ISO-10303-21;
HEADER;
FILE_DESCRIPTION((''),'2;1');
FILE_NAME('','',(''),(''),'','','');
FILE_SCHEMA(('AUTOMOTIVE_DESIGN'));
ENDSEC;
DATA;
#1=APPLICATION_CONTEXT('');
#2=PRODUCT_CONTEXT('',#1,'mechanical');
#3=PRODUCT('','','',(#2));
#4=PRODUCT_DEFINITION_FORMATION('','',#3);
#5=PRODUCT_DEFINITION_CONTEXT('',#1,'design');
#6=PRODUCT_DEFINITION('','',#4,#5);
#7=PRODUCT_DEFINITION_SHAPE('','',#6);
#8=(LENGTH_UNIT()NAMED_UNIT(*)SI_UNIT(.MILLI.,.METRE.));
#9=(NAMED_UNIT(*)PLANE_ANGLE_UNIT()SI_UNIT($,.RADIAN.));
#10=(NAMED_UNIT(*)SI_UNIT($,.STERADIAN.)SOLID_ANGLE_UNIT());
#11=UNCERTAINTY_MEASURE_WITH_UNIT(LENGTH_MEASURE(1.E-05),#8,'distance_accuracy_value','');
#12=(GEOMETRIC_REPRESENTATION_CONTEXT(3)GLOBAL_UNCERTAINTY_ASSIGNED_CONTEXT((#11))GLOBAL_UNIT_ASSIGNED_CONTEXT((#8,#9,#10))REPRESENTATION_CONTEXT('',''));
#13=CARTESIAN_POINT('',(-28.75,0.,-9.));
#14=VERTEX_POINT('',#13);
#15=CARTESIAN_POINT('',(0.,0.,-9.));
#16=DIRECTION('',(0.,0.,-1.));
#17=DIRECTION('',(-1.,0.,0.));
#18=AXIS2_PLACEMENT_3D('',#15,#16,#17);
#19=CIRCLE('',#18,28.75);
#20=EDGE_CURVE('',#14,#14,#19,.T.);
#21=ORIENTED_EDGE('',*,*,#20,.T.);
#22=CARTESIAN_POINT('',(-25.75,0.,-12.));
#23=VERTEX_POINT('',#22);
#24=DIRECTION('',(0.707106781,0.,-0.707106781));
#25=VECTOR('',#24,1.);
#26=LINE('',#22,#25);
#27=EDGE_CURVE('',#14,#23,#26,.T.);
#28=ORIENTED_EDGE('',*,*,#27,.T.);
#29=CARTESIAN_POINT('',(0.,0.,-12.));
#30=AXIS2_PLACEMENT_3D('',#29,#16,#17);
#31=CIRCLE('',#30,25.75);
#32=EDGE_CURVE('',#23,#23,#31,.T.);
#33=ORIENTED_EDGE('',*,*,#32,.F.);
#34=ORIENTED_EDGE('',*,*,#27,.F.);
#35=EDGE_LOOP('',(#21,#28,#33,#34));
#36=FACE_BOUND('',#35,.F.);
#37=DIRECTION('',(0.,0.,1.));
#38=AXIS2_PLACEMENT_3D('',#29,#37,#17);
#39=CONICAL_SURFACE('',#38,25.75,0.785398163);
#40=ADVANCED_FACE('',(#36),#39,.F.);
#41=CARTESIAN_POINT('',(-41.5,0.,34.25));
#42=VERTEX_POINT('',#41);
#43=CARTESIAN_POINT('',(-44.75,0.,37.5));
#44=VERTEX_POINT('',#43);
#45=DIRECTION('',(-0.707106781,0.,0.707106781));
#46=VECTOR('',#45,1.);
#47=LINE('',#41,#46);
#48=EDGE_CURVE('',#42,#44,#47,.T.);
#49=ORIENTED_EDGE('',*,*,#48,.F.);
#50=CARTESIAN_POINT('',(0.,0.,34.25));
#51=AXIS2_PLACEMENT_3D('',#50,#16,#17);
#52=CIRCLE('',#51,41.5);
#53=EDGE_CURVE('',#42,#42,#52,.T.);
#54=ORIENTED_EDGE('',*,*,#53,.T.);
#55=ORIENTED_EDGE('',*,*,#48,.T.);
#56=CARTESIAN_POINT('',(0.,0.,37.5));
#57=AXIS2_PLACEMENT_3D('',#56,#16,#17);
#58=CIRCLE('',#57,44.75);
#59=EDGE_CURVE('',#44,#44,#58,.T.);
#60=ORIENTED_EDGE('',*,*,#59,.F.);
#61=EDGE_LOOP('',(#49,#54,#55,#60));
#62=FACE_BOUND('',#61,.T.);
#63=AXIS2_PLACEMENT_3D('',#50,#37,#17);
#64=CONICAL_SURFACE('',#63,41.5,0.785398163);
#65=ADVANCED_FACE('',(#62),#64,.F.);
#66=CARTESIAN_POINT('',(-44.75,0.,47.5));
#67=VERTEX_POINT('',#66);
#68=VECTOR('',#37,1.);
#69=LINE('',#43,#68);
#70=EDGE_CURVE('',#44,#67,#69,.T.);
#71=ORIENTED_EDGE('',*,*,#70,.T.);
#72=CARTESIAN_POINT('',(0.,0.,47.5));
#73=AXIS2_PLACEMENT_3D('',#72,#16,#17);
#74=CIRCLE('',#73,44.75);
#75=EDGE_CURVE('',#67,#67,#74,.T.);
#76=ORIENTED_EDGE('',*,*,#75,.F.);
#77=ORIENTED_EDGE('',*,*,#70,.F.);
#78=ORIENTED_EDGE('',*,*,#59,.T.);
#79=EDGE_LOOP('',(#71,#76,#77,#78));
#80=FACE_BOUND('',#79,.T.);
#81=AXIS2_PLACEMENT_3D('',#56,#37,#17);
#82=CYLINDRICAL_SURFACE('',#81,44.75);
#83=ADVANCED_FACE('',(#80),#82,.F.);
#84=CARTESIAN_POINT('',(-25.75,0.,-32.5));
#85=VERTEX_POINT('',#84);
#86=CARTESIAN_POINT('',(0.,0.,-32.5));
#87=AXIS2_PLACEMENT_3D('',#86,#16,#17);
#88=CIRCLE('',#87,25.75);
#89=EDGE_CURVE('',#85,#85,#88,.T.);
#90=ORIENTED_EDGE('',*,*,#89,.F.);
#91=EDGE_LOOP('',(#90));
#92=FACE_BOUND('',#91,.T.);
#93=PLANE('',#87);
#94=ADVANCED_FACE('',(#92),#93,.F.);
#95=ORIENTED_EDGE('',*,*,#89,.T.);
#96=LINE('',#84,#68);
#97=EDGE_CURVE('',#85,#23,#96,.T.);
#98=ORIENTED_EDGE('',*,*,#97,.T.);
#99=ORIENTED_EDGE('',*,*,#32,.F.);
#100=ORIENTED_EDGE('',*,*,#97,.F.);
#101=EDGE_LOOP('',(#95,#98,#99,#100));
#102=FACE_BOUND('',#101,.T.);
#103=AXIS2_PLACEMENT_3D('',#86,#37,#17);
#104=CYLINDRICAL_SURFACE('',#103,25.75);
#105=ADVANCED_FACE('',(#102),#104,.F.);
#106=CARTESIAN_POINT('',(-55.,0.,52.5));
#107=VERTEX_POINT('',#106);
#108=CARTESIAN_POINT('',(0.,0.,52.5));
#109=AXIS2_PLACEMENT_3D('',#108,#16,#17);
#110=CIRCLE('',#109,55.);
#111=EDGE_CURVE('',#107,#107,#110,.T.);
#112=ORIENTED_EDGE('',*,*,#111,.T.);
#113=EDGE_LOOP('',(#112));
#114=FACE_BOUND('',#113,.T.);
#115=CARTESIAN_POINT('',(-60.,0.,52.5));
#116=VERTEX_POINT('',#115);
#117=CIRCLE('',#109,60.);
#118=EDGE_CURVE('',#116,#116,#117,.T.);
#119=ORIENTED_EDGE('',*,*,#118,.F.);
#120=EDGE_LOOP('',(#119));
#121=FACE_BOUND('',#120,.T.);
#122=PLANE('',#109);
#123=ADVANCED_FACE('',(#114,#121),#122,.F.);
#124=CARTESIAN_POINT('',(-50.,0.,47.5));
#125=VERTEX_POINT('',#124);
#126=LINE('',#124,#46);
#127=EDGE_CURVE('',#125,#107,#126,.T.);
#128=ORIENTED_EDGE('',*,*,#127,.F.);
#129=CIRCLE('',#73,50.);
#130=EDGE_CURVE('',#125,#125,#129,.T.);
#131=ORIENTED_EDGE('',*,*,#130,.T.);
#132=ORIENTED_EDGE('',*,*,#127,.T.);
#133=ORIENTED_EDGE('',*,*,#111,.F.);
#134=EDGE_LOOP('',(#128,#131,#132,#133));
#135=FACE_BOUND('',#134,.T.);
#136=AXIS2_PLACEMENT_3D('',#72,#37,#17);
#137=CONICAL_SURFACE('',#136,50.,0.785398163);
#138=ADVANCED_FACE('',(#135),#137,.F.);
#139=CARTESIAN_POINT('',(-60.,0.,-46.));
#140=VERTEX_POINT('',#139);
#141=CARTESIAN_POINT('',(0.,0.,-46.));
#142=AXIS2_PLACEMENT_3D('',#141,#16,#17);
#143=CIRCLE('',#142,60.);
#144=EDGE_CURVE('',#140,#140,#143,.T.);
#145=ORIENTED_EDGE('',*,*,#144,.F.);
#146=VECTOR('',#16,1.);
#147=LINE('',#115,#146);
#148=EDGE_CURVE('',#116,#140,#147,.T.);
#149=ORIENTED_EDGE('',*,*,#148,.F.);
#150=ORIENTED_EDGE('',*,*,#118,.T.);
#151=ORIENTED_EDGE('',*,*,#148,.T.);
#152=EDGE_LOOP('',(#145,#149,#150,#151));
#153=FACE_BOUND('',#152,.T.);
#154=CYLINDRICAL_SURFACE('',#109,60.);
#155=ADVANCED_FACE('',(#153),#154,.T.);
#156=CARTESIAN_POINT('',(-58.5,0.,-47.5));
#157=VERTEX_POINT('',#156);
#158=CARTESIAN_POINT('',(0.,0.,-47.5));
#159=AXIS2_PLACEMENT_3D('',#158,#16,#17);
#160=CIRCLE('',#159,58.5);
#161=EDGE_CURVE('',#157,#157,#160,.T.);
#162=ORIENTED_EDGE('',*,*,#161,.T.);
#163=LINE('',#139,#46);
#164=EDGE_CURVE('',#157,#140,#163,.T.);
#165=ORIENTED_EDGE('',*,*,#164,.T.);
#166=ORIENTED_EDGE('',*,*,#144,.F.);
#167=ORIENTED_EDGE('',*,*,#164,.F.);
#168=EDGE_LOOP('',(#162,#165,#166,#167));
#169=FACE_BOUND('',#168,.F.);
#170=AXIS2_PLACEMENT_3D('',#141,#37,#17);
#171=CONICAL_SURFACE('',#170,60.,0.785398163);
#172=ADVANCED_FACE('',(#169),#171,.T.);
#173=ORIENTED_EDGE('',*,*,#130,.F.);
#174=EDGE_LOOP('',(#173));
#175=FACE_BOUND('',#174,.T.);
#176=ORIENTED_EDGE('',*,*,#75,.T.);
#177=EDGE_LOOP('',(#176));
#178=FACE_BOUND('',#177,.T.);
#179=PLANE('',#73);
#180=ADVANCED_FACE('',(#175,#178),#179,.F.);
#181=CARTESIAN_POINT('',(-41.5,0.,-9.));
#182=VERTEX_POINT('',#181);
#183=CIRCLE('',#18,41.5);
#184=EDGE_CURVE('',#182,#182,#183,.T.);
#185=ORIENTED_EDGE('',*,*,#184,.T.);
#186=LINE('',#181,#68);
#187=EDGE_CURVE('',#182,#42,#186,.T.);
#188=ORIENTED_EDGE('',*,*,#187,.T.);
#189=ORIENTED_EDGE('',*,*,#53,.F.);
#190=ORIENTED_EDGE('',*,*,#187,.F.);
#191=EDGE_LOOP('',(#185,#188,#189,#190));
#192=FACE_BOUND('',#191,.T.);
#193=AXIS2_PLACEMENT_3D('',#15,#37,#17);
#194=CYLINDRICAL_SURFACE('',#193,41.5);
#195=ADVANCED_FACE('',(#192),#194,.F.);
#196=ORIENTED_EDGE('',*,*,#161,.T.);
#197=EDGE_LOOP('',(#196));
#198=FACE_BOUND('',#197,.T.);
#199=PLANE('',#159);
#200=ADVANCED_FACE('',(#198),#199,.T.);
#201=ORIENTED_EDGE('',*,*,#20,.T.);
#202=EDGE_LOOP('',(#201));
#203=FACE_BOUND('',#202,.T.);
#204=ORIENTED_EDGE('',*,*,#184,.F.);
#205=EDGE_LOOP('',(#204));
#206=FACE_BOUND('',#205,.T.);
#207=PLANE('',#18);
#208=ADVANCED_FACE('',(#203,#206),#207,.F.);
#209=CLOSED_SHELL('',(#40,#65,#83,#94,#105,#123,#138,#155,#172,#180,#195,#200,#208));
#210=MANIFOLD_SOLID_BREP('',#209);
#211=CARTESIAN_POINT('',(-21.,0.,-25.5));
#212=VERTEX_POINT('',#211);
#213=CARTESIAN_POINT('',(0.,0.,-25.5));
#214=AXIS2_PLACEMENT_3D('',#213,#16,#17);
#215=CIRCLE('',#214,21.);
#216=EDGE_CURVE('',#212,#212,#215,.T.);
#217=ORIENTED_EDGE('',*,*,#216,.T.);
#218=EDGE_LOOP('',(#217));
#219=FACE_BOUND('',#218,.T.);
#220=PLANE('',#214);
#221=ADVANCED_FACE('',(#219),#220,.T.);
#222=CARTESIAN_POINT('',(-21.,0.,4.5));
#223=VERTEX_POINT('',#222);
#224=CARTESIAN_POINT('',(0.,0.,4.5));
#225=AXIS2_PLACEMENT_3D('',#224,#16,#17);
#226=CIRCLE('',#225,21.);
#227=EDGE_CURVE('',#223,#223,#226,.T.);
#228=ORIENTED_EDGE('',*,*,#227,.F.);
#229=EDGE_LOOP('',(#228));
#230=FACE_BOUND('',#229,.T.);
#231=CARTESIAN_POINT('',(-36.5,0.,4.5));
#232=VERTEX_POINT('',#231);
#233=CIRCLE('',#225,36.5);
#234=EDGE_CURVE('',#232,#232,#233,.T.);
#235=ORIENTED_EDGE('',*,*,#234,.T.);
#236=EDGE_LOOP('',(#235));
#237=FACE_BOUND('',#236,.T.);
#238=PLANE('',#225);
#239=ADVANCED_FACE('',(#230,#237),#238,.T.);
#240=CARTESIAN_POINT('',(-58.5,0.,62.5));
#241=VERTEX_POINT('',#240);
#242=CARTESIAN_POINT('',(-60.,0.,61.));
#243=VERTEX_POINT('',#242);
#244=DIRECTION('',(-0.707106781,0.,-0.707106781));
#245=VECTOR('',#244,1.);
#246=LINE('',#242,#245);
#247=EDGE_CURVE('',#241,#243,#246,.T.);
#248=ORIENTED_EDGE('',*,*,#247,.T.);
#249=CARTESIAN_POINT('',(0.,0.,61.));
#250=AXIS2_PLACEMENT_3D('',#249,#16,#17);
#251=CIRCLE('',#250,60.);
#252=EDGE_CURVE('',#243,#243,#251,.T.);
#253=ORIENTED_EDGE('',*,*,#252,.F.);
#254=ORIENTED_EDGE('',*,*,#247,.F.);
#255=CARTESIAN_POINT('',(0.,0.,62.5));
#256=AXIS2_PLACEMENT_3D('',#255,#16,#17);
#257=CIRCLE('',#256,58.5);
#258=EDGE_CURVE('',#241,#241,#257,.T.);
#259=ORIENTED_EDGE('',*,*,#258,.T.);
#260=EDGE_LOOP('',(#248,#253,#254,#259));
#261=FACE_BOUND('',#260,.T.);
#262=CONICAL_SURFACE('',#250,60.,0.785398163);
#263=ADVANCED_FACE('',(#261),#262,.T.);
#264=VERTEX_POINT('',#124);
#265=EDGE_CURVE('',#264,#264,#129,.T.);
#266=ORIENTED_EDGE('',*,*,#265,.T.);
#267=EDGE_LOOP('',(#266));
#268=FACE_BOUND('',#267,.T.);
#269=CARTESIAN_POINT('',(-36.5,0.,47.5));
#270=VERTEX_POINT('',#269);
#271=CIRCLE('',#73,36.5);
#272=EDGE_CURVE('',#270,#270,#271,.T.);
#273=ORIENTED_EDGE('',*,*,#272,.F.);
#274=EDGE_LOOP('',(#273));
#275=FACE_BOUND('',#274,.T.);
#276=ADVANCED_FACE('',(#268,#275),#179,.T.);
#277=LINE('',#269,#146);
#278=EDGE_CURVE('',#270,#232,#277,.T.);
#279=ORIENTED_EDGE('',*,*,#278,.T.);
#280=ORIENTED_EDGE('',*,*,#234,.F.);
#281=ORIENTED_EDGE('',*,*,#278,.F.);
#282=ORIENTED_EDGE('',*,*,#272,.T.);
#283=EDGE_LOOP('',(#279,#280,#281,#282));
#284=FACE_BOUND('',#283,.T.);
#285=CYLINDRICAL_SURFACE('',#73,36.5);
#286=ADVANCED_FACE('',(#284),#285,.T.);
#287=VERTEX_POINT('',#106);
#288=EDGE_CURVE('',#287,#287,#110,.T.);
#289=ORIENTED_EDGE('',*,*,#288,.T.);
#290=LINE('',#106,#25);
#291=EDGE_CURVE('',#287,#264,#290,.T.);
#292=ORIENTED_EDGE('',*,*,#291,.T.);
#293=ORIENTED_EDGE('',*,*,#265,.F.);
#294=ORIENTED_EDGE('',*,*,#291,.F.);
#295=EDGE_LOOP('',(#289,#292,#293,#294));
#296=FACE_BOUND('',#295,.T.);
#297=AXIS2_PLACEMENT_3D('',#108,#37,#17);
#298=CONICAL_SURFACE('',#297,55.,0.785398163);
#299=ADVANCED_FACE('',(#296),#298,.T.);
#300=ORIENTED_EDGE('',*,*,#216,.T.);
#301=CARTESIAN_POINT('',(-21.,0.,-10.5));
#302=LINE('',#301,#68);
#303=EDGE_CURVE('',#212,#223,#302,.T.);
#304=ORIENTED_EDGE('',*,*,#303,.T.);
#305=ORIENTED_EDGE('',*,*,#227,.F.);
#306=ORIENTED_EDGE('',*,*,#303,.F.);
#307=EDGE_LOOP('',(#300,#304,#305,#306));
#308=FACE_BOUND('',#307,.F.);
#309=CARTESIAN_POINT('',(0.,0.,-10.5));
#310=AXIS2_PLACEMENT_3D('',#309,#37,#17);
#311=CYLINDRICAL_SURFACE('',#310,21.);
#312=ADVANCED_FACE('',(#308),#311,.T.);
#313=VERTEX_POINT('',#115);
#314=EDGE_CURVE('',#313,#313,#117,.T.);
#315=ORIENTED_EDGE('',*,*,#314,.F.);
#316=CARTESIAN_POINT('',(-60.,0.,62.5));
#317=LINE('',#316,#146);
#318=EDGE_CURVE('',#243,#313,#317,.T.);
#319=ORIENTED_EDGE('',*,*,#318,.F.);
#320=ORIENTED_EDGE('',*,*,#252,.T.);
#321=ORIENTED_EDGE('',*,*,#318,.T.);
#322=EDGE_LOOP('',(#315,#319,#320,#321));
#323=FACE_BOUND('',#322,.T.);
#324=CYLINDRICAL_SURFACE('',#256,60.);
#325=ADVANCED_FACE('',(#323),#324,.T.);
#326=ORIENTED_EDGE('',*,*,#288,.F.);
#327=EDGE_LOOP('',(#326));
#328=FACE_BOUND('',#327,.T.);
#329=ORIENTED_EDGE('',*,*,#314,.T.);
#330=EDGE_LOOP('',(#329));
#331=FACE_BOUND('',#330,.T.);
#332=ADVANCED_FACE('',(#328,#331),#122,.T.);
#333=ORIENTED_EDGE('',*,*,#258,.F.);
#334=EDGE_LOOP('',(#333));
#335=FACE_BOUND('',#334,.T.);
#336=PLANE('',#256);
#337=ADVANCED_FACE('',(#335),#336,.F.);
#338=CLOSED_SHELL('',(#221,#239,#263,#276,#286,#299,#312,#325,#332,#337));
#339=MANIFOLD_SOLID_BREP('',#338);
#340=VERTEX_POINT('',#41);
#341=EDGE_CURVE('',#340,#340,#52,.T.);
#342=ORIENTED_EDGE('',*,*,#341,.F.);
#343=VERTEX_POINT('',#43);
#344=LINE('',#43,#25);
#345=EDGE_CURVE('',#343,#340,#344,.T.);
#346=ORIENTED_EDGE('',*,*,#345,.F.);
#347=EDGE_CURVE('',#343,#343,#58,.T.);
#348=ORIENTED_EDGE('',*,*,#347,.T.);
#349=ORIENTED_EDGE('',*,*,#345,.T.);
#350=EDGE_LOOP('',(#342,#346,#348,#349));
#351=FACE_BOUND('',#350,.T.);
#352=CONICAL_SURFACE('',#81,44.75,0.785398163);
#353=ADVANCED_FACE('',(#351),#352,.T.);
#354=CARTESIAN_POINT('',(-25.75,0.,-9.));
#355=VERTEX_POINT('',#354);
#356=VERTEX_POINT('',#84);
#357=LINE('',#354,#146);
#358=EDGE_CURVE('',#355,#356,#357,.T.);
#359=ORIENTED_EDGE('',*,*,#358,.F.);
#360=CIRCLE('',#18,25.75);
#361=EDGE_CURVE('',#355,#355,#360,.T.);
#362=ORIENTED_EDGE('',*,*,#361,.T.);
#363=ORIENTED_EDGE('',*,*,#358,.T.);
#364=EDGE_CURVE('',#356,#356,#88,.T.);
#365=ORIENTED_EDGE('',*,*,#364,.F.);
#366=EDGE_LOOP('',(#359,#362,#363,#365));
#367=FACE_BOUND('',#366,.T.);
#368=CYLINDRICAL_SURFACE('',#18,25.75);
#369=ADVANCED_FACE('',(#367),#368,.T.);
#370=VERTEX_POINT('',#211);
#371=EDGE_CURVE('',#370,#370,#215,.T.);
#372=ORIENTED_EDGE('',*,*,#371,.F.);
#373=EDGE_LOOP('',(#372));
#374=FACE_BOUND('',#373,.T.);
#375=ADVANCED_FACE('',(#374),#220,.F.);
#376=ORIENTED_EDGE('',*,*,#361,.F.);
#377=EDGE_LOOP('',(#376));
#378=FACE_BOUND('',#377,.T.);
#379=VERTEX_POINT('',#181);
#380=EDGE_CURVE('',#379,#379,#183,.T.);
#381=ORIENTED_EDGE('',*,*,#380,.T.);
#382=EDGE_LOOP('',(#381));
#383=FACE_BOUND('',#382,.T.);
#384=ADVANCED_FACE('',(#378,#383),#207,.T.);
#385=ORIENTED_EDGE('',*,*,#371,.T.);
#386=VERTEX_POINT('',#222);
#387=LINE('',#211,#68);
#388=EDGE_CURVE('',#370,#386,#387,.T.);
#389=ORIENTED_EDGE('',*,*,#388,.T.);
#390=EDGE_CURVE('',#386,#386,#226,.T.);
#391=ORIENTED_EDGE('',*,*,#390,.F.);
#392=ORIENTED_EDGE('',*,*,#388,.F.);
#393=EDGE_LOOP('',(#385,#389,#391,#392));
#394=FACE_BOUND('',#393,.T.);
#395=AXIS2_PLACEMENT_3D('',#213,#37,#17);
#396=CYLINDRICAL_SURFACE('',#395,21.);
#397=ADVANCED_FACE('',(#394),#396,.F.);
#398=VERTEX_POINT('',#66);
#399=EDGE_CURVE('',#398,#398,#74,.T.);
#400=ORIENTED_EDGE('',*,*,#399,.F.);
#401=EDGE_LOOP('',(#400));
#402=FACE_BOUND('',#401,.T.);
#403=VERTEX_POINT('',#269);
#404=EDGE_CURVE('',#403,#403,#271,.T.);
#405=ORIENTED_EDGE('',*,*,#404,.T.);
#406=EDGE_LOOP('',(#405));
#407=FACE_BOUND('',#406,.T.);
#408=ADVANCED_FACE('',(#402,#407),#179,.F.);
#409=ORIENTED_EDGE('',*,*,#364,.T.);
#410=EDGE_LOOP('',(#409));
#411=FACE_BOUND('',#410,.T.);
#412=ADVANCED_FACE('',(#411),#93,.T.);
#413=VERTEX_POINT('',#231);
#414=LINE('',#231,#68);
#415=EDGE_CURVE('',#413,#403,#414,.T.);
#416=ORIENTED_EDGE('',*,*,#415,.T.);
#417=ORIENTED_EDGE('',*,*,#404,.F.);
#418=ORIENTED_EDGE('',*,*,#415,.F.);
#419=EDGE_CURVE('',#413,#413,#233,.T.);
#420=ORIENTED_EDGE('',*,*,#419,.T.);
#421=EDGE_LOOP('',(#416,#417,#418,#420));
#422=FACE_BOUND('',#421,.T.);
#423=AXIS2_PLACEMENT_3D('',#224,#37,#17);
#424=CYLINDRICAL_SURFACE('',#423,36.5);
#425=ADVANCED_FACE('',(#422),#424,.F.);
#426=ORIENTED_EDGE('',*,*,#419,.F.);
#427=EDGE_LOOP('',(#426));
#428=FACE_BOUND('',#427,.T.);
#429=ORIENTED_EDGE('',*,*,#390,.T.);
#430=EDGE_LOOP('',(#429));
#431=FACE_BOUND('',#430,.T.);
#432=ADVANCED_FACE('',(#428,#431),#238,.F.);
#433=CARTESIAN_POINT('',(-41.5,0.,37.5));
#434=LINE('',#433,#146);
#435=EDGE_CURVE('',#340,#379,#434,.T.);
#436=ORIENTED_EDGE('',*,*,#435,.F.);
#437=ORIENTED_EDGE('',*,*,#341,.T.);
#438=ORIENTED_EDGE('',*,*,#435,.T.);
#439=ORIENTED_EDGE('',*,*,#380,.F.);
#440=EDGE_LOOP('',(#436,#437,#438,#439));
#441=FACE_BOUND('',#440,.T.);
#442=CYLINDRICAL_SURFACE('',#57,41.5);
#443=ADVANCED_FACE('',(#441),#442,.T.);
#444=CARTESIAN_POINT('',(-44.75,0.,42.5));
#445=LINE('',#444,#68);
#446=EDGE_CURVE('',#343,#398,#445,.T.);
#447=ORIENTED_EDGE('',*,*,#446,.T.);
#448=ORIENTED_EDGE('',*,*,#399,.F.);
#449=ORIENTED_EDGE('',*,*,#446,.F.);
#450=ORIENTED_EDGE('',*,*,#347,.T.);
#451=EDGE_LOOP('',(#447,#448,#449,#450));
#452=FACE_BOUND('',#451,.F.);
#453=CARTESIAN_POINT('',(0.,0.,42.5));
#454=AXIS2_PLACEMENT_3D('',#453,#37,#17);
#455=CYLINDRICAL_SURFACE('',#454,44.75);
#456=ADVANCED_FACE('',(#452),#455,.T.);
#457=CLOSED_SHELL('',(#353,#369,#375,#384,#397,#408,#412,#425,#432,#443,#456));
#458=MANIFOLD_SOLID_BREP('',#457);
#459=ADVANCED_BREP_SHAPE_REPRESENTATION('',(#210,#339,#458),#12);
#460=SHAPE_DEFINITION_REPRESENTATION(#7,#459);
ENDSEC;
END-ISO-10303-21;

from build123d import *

# Parameters (mm, degrees)
F0_W    = 36.5
F0_H    = 10
F0_W_2  = 21
F0_H_2  = 21
F0_H_3  = 30
F0_W_3  = 3.25
F0_W_4  = 5
F4_SIZE = 1.5
F5_SIZE = 1.5
F6_SIZE = 3


# Not quite as in the source:
# - a feature names something its author has since deleted; it is built from what else it names


with BuildPart() as f1:
    # F0 (on Front) → F1 (revolve)
    with BuildSketch(Plane.XZ):
        Polygon((-60, 47.5), (-60, 37.5), (-44.75, 37.5), (-44.75, 47.5), (-50, 47.5), align=None)
        Polygon((-60, -47.5), (0, -47.5), (0, -32.5), (-25.75, -32.5), (-25.75, -9), (-41.5, -9), (-41.5, 32.5), (-41.5, 34.25), (-44.75, 37.5), (-60, 37.5), align=None)
        Polygon((-55, 52.5), (-60, 52.5), (-60, 47.5), (-50, 47.5), align=None)
    revolve(axis=Axis((0, 0, 13.6922076344), (0, 0, -1)))

    # F5
    f5_edges = [f1.edges().sort_by_distance(p)[0] for p in [
        (60, 0, -47.5),
    ]]
    chamfer(f5_edges, length=F5_SIZE)

    # F6
    f6_edges = [f1.edges().sort_by_distance(p)[0] for p in [
        (25.75, 0, -9),
    ]]
    chamfer(f6_edges, length=F6_SIZE)


with BuildPart() as f2:
    # F0 (on Front) → F2 (revolve)
    with BuildSketch(Plane.XZ):
        Polygon((0, 25.5), (0, 37.5), (-36.5, 37.5), (-36.5, 25.5), (-36.5, 4.5), (-21, 4.5), (-21, 25.5), align=None)
        with Locations((-18.25, 42.5)):
            Rectangle(F0_W, F0_H)
        with Locations((-10.5, 15)):
            Rectangle(F0_W_2, F0_H_2)
        with Locations((-10.5, -10.5)):
            Rectangle(F0_W_2, F0_H_3)
        Polygon((0, 47.5), (0, 62.5), (-60, 62.5), (-60, 52.5), (-55, 52.5), (-50, 47.5), (-44.75, 47.5), (-41.5, 47.5), (-36.5, 47.5), align=None)
    revolve(axis=Axis((0, 0, 13.6922076344), (0, 0, -1)))

    # F4
    f4_edges = [f2.edges().sort_by_distance(p)[0] for p in [
        (60, 0, 62.5),
    ]]
    chamfer(f4_edges, length=F4_SIZE)


with BuildPart() as f3:
    # F0 (on Front) → F3 (revolve)
    with BuildSketch(Plane.XZ):
        with Locations((-43.125, 42.5)):
            Rectangle(F0_W_3, F0_H)
        with Locations((-39, 42.5)):
            Rectangle(F0_W_4, F0_H)
        Polygon((-25.75, -32.5), (0, -32.5), (0, -25.5), (-21, -25.5), (-21, 4.5), (-36.5, 4.5), (-36.5, 25.5), (-36.5, 37.5), (-41.5, 37.5), (-41.5, 34.25), (-41.5, 32.5), (-41.5, -9), (-25.75, -9), align=None)
        Polygon((-41.5, 37.5), (-44.75, 37.5), (-41.5, 34.25), align=None)
    revolve(axis=Axis((0, 0, 13.6922076344), (0, 0, -1)))


solid = Compound([f1.part, f2.part, f3.part])
